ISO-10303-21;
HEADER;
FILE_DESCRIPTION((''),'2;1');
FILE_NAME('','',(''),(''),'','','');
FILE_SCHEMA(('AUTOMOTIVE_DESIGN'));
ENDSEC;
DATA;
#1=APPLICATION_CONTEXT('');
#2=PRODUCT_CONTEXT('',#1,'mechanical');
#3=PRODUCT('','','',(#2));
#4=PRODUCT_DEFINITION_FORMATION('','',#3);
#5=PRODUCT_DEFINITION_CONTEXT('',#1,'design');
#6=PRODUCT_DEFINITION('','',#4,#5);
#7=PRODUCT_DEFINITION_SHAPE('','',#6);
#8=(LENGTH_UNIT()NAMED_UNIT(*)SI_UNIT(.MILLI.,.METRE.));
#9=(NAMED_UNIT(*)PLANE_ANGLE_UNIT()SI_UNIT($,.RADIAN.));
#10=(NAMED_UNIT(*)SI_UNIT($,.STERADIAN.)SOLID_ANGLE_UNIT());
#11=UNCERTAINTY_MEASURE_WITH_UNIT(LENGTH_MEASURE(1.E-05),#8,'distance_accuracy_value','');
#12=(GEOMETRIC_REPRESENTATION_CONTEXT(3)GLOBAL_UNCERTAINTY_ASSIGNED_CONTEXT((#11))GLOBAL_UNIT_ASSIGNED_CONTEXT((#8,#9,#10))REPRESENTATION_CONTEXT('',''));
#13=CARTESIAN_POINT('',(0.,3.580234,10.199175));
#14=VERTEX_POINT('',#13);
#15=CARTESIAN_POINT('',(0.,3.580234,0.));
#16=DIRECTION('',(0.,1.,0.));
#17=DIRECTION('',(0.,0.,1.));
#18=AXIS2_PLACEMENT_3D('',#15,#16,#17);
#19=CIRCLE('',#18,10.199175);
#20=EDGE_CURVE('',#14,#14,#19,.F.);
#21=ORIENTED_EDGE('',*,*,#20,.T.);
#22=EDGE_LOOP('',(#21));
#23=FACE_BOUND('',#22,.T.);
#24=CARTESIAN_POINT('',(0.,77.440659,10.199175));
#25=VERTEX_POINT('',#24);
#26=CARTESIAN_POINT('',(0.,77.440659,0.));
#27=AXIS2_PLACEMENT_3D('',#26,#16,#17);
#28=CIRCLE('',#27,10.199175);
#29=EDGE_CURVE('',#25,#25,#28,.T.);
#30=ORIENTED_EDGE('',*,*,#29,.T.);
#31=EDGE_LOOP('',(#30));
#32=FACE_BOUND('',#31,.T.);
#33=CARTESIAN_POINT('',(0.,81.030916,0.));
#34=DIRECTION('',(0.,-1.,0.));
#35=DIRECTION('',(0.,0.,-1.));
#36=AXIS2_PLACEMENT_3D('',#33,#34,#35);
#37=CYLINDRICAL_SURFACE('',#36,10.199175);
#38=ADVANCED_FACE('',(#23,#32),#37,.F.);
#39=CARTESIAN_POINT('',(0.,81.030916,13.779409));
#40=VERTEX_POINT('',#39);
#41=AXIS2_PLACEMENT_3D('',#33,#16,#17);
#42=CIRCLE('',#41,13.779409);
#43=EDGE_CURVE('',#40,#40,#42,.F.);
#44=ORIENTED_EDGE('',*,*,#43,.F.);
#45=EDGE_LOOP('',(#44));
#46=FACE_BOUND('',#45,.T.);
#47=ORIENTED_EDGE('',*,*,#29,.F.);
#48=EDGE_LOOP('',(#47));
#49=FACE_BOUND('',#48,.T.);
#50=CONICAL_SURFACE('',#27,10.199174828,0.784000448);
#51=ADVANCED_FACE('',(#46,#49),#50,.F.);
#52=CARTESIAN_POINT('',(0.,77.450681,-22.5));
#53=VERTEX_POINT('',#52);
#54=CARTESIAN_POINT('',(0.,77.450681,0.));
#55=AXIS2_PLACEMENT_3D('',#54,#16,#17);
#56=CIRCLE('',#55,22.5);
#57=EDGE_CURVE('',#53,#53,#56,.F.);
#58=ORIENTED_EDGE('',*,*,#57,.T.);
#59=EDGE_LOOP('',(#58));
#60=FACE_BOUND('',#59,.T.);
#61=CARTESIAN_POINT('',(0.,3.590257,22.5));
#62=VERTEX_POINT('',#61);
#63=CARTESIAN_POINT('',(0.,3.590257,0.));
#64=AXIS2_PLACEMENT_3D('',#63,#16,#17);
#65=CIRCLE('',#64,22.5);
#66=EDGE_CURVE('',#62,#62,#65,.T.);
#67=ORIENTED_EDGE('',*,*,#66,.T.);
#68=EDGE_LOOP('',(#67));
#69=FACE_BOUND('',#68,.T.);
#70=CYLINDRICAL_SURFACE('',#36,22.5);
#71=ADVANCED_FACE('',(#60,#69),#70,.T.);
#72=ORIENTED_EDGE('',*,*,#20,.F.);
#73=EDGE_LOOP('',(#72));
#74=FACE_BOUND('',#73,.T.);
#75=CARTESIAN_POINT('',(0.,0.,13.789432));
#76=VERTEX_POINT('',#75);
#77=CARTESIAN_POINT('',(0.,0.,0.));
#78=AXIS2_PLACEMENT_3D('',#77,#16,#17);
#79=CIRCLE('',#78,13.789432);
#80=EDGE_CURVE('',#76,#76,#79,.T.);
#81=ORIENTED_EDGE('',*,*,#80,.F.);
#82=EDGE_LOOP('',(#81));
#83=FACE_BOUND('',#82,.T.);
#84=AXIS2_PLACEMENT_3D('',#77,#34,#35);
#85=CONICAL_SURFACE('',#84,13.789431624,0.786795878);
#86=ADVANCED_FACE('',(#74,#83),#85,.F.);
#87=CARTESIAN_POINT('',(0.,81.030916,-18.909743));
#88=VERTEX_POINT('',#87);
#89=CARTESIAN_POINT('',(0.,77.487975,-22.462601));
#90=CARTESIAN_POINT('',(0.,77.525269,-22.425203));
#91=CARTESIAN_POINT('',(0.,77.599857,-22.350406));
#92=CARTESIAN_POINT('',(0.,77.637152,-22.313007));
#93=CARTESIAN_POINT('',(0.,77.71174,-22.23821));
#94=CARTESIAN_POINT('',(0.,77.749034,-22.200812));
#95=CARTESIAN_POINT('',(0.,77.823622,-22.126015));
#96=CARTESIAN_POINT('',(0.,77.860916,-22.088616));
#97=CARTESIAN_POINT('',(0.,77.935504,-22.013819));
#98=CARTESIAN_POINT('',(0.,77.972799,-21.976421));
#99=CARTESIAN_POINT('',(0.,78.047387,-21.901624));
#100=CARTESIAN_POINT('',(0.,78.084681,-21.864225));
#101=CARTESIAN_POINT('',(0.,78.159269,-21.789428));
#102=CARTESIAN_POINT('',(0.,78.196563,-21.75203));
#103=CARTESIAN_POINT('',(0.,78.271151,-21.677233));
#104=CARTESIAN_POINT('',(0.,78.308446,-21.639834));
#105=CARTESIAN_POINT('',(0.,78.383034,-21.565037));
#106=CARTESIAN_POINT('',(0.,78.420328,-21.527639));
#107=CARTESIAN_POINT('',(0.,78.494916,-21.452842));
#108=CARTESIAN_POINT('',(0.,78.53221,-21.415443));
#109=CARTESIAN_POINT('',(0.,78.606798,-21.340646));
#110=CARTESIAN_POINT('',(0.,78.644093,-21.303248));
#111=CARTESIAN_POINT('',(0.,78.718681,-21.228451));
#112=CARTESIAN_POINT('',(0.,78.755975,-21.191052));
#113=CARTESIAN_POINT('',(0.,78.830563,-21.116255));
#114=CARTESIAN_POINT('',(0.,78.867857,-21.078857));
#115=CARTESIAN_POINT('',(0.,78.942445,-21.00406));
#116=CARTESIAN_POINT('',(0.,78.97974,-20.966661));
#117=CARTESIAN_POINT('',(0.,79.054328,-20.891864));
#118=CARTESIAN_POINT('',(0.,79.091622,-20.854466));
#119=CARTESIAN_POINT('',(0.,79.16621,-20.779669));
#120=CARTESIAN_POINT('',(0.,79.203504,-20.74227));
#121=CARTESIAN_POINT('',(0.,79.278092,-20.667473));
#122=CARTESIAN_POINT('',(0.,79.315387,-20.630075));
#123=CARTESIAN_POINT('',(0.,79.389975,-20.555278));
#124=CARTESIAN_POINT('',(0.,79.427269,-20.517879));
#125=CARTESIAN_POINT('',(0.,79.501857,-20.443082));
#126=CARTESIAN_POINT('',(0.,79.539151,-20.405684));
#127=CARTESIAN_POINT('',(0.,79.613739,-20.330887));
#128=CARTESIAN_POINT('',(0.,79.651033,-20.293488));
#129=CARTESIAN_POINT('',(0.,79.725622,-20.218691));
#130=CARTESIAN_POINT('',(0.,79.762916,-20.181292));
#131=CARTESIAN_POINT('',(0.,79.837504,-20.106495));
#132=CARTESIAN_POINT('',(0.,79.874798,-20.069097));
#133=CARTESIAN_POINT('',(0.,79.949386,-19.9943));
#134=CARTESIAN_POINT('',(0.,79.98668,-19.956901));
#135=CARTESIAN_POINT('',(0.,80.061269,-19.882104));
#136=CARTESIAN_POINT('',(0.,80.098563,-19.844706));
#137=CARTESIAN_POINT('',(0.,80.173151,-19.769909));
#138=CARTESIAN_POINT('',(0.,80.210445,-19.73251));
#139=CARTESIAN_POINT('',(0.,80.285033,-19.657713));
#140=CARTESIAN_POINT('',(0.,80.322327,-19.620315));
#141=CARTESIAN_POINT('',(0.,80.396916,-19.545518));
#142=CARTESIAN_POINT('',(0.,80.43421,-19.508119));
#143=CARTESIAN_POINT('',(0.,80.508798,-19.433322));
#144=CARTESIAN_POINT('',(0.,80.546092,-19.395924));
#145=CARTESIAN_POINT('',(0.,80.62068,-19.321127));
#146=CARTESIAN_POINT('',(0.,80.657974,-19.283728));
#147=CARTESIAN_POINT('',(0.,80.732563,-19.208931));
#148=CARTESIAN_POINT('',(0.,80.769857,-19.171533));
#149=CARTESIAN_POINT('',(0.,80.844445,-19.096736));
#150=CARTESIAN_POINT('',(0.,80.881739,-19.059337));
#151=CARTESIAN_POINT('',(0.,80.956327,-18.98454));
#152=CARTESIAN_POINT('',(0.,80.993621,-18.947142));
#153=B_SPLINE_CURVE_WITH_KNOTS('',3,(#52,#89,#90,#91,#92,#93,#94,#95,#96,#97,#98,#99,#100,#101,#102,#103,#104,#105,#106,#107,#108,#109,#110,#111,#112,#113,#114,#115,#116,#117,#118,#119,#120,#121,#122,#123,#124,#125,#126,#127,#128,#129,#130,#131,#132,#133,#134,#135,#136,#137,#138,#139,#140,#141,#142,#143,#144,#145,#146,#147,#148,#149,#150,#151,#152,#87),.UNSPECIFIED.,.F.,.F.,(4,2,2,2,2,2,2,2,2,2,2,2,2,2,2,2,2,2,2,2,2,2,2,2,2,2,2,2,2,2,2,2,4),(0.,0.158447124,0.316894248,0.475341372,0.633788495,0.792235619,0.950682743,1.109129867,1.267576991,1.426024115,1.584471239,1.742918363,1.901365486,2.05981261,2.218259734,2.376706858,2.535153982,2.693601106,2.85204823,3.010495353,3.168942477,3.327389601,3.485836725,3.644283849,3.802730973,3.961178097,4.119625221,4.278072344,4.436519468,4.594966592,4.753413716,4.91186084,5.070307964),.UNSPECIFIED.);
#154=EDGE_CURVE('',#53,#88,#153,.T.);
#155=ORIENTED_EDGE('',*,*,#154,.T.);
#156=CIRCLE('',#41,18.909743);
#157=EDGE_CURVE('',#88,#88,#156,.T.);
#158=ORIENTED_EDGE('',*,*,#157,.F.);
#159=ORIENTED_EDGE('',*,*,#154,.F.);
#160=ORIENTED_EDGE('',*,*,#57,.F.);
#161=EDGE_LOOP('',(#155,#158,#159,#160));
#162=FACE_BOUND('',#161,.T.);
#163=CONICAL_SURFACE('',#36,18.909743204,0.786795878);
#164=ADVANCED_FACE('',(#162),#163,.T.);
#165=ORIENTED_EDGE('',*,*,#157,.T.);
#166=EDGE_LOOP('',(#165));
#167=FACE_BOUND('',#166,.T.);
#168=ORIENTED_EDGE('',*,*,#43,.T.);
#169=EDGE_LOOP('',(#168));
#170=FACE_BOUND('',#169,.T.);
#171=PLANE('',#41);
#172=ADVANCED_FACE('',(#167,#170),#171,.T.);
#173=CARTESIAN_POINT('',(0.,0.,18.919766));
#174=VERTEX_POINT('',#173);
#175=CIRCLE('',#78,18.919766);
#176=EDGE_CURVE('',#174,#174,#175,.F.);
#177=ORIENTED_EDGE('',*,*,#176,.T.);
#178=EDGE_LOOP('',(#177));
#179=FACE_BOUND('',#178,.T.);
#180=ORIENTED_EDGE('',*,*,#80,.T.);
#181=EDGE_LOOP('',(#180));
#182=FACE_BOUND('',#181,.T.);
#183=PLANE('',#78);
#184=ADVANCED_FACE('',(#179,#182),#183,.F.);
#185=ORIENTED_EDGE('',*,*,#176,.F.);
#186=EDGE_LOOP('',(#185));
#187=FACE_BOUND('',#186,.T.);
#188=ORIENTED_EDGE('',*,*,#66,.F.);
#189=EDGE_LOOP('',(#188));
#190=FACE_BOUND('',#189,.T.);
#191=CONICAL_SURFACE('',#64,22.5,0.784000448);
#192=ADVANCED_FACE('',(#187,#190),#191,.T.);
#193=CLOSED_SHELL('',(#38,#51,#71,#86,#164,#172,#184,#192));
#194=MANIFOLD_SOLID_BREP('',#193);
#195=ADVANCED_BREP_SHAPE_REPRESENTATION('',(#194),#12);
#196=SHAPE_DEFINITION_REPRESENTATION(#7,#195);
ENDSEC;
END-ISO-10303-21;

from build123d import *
from OCP.BRepFilletAPI import BRepFilletAPI_MakeChamfer

# Parameters (mm, degrees)
SKETCH1_R           = 22.5
BOSS_EXTRUDE1_DEPTH = 81.030915537
SKETCH2_R           = 10.199174828
CUT_EXTRUDE1_DEPTH  = 88.054633839
CHAMFER1_SIZE       = 3.580234487
CHAMFER1_SIZE2      = 3.590256796


with BuildPart() as part:
    # Sketch1 → Boss-Extrude1 (new body)
    with BuildSketch(Plane(origin=(0, 0, 0), x_dir=(1, 0, 0), z_dir=(0, 1, 0))):
        Circle(SKETCH1_R)
    extrude(amount=BOSS_EXTRUDE1_DEPTH)

    # Sketch2 → Cut-Extrude1 (cut, through all)
    with BuildSketch(Plane(origin=(0, 0, 0), x_dir=(1, 0, 0), z_dir=(0, 1, 0))):
        Circle(SKETCH2_R)
    extrude(amount=CUT_EXTRUDE1_DEPTH, mode=Mode.SUBTRACT)

    # Chamfer1: one chamfer whose edges measure the first distance from different faces: ONE call of the kernel's chamfer builder (chamfer() names one face for all edges)
    chamfer1_edges_1 = [part.edges().sort_by_distance(p)[0] for p in [
        (-10.199174828, 81.030915537, 0),
    ]]
    chamfer1_side_1 = [part.faces().sort_by_distance(p)[0] for p in [
        (-21.863603897, 81.030915537, 0),
    ]]
    chamfer1_edges_2 = [part.edges().sort_by_distance(p)[0] for p in [
        (-10.199174828, 0, 0),
    ]]
    chamfer1_side_2 = [part.faces().sort_by_distance(p)[0] for p in [
        (-10.199174828, 40.515457769, 0),
    ]]
    chamfer1_edges_3 = [part.edges().sort_by_distance(p)[0] for p in [
        (-22.5, 0, 0),
    ]]
    chamfer1_side_3 = [part.faces().sort_by_distance(p)[0] for p in [
        (-21.863603897, 0, 0),
    ]]
    chamfer1_edges_4 = [part.edges().sort_by_distance(p)[0] for p in [
        (-22.5, 81.030915537, 0),
    ]]
    chamfer1_side_4 = [part.faces().sort_by_distance(p)[0] for p in [
        (-22.5, 40.515457769, 0),
    ]]
    chamfer1 = BRepFilletAPI_MakeChamfer(part.part.solid().wrapped)
    for e in chamfer1_edges_1:
        chamfer1.Add(CHAMFER1_SIZE, CHAMFER1_SIZE2, e.wrapped, chamfer1_side_1[0].wrapped)  # the first distance lies on this face
    for e in chamfer1_edges_2:
        chamfer1.Add(CHAMFER1_SIZE, CHAMFER1_SIZE2, e.wrapped, chamfer1_side_2[0].wrapped)  # the first distance lies on this face
    for e in chamfer1_edges_3:
        chamfer1.Add(CHAMFER1_SIZE, CHAMFER1_SIZE2, e.wrapped, chamfer1_side_3[0].wrapped)  # the first distance lies on this face
    for e in chamfer1_edges_4:
        chamfer1.Add(CHAMFER1_SIZE, CHAMFER1_SIZE2, e.wrapped, chamfer1_side_4[0].wrapped)  # the first distance lies on this face
    add(Compound.cast(chamfer1.Shape()), mode=Mode.REPLACE)


solid = part.part
